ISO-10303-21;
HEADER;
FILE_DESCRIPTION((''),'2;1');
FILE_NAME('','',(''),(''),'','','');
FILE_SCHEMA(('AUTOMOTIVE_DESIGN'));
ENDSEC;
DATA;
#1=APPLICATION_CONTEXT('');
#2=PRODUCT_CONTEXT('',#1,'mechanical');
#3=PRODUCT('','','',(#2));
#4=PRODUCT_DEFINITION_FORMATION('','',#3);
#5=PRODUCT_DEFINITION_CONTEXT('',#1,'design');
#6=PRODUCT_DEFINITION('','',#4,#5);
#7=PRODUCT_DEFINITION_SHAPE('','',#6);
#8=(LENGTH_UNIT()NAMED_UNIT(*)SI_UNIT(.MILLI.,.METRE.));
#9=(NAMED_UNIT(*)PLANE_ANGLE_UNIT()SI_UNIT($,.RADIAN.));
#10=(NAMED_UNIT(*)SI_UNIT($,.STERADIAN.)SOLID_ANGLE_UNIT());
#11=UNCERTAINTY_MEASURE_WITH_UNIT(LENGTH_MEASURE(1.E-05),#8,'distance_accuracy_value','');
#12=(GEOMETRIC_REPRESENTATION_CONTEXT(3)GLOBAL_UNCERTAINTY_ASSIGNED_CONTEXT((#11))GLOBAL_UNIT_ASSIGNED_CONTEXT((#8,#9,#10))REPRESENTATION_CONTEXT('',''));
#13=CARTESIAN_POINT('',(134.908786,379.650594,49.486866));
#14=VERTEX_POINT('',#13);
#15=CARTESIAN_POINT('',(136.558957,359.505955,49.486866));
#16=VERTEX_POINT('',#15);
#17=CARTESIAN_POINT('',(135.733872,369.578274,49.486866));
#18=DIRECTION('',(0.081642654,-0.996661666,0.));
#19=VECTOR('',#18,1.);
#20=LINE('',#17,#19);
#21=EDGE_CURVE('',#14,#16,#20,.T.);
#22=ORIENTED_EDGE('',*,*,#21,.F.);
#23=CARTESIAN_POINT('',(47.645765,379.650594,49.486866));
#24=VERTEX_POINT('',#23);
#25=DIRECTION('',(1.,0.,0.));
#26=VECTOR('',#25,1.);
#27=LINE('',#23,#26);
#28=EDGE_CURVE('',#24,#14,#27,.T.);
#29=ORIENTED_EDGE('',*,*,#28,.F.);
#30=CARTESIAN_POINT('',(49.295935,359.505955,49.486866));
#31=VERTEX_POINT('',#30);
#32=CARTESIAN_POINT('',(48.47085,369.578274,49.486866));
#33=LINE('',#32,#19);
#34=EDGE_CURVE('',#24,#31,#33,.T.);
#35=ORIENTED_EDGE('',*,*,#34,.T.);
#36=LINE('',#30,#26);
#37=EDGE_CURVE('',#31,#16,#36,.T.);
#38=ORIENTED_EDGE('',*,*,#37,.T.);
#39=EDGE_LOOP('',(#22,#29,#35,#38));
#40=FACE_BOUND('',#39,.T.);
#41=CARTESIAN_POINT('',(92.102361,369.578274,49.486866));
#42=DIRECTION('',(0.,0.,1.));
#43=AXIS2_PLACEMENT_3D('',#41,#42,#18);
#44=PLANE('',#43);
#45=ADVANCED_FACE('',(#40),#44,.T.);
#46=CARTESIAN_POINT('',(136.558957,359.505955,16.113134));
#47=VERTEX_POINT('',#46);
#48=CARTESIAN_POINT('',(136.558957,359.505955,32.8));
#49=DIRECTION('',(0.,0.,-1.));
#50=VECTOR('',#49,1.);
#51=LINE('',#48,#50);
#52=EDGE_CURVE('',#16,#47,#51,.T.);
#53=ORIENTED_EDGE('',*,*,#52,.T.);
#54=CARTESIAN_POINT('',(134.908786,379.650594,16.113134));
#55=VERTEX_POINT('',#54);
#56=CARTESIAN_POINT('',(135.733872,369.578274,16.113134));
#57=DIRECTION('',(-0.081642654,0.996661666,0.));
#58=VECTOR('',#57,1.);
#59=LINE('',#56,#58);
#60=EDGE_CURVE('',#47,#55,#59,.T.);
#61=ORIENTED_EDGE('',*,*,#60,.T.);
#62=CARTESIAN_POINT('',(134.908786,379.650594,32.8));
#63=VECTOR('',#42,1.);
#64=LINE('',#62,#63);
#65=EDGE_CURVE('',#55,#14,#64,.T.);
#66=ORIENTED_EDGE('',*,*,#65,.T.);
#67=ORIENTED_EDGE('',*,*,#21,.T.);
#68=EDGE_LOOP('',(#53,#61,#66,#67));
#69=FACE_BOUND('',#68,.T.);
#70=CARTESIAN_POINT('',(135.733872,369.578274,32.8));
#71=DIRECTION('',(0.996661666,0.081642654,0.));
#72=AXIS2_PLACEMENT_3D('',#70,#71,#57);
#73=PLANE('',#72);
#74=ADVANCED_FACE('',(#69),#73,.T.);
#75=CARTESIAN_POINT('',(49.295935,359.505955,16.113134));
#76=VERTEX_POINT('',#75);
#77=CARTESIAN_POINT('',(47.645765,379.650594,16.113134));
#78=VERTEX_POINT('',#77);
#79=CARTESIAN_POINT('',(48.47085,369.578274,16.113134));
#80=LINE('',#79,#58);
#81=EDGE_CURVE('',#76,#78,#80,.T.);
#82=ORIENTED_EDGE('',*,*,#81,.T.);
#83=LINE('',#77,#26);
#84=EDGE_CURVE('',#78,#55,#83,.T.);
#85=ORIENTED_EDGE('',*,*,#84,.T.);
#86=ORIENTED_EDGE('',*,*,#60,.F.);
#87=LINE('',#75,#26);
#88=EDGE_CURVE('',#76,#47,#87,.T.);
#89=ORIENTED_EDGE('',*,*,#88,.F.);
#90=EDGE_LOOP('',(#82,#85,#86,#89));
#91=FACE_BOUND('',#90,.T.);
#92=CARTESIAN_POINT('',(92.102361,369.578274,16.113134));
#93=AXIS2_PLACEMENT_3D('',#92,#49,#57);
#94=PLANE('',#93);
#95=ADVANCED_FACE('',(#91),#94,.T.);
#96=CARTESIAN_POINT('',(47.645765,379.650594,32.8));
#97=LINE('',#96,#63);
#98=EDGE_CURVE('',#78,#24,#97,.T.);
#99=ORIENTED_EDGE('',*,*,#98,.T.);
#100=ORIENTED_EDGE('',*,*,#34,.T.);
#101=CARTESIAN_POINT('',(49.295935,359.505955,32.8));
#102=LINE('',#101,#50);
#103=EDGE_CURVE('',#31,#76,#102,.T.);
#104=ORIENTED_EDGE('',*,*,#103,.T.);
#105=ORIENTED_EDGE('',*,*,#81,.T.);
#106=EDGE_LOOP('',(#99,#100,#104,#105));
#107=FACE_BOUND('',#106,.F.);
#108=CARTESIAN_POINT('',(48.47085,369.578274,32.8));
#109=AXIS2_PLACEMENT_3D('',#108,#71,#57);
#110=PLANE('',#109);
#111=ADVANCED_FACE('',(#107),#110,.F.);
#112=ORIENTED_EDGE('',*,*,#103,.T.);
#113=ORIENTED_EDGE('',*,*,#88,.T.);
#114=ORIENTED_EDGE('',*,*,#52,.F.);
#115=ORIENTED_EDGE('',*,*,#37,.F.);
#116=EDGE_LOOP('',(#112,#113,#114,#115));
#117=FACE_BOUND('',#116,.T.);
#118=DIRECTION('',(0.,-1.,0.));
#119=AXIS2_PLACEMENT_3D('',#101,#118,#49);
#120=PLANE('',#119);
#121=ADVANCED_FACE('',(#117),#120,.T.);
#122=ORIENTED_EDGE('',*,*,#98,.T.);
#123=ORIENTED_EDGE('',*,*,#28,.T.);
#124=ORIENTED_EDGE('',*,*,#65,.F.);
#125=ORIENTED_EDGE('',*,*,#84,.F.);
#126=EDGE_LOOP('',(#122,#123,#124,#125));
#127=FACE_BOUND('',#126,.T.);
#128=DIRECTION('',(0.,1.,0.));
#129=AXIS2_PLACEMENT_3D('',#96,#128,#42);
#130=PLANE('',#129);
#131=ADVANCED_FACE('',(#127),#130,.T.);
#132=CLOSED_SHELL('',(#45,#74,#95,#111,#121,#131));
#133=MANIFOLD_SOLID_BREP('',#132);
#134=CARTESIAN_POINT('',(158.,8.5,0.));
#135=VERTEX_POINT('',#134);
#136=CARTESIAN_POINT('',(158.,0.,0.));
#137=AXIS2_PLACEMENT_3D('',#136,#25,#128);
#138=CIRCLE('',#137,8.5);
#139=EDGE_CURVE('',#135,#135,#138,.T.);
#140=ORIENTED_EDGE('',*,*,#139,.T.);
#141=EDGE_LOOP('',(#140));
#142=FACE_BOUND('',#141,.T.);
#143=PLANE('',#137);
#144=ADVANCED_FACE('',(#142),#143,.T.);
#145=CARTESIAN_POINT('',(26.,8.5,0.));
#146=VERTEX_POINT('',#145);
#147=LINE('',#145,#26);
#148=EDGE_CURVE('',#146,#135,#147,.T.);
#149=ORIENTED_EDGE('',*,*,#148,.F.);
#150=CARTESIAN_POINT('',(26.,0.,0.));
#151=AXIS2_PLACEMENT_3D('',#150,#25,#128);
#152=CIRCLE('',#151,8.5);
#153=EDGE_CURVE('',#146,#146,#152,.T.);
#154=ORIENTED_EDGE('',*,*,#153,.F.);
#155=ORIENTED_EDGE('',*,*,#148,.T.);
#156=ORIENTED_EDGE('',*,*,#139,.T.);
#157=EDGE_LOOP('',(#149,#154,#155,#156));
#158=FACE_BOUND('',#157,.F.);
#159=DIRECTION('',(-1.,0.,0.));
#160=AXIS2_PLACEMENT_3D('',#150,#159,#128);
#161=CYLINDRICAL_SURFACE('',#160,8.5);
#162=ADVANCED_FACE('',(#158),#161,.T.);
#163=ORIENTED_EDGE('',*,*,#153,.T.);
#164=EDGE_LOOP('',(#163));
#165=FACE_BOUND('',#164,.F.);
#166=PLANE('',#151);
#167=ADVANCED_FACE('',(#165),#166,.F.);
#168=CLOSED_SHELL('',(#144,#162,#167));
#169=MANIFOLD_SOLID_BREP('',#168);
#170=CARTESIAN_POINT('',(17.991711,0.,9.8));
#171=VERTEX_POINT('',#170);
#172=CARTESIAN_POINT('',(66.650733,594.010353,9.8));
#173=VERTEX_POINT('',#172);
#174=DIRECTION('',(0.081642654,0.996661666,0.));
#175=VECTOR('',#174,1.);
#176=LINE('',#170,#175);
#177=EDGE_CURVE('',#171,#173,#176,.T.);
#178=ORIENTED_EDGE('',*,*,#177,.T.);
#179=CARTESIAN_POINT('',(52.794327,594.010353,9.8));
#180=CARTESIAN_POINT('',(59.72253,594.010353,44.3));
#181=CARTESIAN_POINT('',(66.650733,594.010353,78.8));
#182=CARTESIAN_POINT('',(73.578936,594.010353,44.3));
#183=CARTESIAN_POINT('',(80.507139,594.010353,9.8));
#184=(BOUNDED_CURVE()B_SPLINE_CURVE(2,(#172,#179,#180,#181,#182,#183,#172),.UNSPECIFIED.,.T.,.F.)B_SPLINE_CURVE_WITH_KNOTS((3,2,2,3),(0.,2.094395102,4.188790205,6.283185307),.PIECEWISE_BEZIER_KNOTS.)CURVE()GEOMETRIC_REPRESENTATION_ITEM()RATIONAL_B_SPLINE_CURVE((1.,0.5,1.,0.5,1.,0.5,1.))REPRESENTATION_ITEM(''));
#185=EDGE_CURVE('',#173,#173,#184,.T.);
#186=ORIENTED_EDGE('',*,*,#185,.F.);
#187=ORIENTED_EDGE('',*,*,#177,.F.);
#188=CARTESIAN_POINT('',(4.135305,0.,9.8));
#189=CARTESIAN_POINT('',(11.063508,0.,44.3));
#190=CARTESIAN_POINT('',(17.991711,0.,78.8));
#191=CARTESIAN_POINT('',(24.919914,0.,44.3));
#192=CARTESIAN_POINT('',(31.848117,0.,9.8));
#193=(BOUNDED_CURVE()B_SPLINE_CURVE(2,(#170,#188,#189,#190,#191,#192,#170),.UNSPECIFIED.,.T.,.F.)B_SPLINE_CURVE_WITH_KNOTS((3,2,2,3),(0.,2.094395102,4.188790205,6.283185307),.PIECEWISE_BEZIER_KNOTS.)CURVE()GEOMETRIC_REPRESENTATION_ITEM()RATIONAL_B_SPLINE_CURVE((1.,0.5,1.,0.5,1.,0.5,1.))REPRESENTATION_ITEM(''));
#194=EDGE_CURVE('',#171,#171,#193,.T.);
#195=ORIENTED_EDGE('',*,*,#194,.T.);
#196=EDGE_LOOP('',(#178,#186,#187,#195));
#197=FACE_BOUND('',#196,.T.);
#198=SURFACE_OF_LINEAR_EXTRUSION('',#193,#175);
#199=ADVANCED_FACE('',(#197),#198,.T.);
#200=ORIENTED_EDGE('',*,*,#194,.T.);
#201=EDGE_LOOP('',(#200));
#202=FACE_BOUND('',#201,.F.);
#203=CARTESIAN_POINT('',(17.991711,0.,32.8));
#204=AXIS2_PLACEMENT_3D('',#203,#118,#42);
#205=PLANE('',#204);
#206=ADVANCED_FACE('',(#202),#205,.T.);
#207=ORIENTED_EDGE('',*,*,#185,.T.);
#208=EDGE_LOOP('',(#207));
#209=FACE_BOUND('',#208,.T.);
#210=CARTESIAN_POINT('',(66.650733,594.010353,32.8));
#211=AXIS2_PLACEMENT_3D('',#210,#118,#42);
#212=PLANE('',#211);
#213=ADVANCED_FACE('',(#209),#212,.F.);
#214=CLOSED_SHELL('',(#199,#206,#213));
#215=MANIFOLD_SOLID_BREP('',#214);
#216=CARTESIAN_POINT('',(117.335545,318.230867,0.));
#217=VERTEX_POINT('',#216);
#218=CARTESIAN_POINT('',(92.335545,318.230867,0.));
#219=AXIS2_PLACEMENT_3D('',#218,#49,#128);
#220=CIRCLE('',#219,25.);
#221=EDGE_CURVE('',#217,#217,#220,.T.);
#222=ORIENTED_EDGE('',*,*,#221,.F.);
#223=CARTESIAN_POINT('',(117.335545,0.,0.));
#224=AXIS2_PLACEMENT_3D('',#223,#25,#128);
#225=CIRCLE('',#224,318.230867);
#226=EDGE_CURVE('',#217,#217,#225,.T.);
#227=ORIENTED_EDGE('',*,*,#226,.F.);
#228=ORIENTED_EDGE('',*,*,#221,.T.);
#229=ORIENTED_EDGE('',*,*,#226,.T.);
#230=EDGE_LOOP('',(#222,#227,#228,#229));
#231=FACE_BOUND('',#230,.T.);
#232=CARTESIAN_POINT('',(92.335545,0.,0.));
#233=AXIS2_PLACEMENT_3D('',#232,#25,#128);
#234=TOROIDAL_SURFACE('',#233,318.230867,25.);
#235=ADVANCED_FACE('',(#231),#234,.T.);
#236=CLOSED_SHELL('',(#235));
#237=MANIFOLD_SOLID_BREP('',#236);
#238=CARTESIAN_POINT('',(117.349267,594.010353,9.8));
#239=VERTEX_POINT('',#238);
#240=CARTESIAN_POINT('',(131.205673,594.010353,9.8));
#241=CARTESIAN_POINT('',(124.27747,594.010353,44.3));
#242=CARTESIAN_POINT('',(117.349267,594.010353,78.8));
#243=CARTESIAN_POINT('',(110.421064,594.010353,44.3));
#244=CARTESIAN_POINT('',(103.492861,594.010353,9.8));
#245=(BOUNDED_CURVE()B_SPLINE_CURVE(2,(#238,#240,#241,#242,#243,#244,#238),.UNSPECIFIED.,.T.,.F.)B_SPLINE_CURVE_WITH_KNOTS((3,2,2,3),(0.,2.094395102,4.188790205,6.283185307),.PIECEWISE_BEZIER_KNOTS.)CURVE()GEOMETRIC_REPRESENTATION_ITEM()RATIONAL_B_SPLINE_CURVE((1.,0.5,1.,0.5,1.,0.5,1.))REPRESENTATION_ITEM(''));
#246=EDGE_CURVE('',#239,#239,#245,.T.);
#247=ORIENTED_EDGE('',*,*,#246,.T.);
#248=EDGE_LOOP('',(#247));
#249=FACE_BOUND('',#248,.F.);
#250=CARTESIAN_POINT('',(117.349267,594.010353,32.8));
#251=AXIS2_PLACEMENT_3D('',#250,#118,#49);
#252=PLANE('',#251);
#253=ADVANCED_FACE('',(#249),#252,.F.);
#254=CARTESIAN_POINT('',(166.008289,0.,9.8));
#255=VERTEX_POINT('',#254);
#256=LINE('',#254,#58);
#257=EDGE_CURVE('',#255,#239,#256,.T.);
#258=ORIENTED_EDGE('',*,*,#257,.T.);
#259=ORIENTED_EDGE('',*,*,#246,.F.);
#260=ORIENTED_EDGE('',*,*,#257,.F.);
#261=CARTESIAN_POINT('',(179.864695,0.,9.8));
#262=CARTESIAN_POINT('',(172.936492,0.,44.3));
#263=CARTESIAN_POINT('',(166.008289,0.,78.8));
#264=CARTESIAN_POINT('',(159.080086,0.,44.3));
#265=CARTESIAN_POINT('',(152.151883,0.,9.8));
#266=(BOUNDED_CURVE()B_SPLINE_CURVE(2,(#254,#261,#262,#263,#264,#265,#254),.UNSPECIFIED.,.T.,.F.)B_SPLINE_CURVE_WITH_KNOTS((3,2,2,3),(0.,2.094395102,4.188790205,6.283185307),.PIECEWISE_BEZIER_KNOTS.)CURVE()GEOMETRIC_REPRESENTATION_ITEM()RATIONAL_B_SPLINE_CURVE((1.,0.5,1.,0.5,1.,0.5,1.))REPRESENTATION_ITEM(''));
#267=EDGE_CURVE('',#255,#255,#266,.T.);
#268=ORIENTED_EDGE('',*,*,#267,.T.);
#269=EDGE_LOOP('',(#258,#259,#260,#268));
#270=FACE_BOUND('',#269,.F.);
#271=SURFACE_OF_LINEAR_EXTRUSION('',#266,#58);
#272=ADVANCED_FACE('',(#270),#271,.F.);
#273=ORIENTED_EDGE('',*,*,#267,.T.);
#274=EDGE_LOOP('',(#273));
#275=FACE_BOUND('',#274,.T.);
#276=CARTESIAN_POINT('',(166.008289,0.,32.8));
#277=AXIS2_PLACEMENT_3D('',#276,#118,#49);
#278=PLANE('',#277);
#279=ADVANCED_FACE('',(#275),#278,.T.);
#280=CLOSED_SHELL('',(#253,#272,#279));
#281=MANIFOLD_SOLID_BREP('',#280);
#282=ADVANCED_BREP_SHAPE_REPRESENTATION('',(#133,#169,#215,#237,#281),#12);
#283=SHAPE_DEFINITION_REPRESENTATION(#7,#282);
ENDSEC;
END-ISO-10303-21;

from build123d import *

# Parameters (mm, degrees)
F4_R     = 8.5
F5_DEPTH = 132
F8_R     = 25
F16_W    = 20.2121138573
F16_H    = 33.3737321198


# Not quite as in the source:
# - the program builds the solid bodies; features that only make, move or delete a surface that nothing else refers to are left out


with BuildPart() as f5:
    # F4 (on offset) → F5 (new body)
    with BuildSketch(Plane.YZ.offset(26)):
        Circle(F4_R)
    extrude(amount=F5_DEPTH)


with BuildPart() as f9:
    # F9: sweep along a path in F7
    with BuildLine(Plane.YZ.offset(92)) as f9_path:
        CenterArc((0, 0), 318, 0, 360)
    # F8 (on Front) → F9 (sweep)
    with BuildSketch(Plane.XZ):
        with Locations((92.3355445266, 318.2308673859)):
            Circle(F8_R)
    sweep(path=f9_path.line)


with BuildPart() as f12:
    # F12: sweep along a path in F10
    with BuildLine(Plane.XY.offset(32.8)) as f12_path:
        Line((166.0082890247, 0), (117.3492670059, 594.0103530884))
    # F11 (on Front) → F12 (sweep)
    with BuildSketch(Plane.XZ):
        with BuildLine():
            add(Edge.make_bspline(
                [(166.0082890247, 9.8), (179.8646954852, 9.8), (172.9364922549, 44.3), (166.0082890247, 78.8), (159.0800857944, 44.3), (152.1518825641, 9.8), (166.0082890247, 9.8)],
                knots=[0, 0, 0, 2.0943951024, 2.0943951024, 4.1887902048, 4.1887902048, 6.2831853072, 6.2831853072, 6.2831853072], degree=2, weights=[1, 0.5, 1, 0.5, 1, 0.5, 1]))
        make_face()
    sweep(path=f12_path.line)


with BuildPart() as f13_1:
    # F13: instance of F12
    add(f12.part.mirror(Plane.YZ.offset(92)))


with BuildPart() as f17:
    # F17: sweep along a path in F14
    with BuildLine(Plane.XY.offset(32.8)) as f17_path:
        Line((48.0404309928, 369.5430159569), (135.303452611, 369.5430159569))
    # F16 (on face) → F17 (sweep)
    with BuildSketch(Plane(origin=(164.9017569532, 13.5081117371, 0), x_dir=(-0.0816426544, 0.9966616663, 0), z_dir=(0.9966616663, 0.0816426544, 0))):
        with Locations((357.2628250169, 32.8)):
            Rectangle(F16_W, F16_H)
    sweep(path=f17_path.line)


solid = Compound([f5.part, f9.part, f12.part, f13_1.part, f17.part])
